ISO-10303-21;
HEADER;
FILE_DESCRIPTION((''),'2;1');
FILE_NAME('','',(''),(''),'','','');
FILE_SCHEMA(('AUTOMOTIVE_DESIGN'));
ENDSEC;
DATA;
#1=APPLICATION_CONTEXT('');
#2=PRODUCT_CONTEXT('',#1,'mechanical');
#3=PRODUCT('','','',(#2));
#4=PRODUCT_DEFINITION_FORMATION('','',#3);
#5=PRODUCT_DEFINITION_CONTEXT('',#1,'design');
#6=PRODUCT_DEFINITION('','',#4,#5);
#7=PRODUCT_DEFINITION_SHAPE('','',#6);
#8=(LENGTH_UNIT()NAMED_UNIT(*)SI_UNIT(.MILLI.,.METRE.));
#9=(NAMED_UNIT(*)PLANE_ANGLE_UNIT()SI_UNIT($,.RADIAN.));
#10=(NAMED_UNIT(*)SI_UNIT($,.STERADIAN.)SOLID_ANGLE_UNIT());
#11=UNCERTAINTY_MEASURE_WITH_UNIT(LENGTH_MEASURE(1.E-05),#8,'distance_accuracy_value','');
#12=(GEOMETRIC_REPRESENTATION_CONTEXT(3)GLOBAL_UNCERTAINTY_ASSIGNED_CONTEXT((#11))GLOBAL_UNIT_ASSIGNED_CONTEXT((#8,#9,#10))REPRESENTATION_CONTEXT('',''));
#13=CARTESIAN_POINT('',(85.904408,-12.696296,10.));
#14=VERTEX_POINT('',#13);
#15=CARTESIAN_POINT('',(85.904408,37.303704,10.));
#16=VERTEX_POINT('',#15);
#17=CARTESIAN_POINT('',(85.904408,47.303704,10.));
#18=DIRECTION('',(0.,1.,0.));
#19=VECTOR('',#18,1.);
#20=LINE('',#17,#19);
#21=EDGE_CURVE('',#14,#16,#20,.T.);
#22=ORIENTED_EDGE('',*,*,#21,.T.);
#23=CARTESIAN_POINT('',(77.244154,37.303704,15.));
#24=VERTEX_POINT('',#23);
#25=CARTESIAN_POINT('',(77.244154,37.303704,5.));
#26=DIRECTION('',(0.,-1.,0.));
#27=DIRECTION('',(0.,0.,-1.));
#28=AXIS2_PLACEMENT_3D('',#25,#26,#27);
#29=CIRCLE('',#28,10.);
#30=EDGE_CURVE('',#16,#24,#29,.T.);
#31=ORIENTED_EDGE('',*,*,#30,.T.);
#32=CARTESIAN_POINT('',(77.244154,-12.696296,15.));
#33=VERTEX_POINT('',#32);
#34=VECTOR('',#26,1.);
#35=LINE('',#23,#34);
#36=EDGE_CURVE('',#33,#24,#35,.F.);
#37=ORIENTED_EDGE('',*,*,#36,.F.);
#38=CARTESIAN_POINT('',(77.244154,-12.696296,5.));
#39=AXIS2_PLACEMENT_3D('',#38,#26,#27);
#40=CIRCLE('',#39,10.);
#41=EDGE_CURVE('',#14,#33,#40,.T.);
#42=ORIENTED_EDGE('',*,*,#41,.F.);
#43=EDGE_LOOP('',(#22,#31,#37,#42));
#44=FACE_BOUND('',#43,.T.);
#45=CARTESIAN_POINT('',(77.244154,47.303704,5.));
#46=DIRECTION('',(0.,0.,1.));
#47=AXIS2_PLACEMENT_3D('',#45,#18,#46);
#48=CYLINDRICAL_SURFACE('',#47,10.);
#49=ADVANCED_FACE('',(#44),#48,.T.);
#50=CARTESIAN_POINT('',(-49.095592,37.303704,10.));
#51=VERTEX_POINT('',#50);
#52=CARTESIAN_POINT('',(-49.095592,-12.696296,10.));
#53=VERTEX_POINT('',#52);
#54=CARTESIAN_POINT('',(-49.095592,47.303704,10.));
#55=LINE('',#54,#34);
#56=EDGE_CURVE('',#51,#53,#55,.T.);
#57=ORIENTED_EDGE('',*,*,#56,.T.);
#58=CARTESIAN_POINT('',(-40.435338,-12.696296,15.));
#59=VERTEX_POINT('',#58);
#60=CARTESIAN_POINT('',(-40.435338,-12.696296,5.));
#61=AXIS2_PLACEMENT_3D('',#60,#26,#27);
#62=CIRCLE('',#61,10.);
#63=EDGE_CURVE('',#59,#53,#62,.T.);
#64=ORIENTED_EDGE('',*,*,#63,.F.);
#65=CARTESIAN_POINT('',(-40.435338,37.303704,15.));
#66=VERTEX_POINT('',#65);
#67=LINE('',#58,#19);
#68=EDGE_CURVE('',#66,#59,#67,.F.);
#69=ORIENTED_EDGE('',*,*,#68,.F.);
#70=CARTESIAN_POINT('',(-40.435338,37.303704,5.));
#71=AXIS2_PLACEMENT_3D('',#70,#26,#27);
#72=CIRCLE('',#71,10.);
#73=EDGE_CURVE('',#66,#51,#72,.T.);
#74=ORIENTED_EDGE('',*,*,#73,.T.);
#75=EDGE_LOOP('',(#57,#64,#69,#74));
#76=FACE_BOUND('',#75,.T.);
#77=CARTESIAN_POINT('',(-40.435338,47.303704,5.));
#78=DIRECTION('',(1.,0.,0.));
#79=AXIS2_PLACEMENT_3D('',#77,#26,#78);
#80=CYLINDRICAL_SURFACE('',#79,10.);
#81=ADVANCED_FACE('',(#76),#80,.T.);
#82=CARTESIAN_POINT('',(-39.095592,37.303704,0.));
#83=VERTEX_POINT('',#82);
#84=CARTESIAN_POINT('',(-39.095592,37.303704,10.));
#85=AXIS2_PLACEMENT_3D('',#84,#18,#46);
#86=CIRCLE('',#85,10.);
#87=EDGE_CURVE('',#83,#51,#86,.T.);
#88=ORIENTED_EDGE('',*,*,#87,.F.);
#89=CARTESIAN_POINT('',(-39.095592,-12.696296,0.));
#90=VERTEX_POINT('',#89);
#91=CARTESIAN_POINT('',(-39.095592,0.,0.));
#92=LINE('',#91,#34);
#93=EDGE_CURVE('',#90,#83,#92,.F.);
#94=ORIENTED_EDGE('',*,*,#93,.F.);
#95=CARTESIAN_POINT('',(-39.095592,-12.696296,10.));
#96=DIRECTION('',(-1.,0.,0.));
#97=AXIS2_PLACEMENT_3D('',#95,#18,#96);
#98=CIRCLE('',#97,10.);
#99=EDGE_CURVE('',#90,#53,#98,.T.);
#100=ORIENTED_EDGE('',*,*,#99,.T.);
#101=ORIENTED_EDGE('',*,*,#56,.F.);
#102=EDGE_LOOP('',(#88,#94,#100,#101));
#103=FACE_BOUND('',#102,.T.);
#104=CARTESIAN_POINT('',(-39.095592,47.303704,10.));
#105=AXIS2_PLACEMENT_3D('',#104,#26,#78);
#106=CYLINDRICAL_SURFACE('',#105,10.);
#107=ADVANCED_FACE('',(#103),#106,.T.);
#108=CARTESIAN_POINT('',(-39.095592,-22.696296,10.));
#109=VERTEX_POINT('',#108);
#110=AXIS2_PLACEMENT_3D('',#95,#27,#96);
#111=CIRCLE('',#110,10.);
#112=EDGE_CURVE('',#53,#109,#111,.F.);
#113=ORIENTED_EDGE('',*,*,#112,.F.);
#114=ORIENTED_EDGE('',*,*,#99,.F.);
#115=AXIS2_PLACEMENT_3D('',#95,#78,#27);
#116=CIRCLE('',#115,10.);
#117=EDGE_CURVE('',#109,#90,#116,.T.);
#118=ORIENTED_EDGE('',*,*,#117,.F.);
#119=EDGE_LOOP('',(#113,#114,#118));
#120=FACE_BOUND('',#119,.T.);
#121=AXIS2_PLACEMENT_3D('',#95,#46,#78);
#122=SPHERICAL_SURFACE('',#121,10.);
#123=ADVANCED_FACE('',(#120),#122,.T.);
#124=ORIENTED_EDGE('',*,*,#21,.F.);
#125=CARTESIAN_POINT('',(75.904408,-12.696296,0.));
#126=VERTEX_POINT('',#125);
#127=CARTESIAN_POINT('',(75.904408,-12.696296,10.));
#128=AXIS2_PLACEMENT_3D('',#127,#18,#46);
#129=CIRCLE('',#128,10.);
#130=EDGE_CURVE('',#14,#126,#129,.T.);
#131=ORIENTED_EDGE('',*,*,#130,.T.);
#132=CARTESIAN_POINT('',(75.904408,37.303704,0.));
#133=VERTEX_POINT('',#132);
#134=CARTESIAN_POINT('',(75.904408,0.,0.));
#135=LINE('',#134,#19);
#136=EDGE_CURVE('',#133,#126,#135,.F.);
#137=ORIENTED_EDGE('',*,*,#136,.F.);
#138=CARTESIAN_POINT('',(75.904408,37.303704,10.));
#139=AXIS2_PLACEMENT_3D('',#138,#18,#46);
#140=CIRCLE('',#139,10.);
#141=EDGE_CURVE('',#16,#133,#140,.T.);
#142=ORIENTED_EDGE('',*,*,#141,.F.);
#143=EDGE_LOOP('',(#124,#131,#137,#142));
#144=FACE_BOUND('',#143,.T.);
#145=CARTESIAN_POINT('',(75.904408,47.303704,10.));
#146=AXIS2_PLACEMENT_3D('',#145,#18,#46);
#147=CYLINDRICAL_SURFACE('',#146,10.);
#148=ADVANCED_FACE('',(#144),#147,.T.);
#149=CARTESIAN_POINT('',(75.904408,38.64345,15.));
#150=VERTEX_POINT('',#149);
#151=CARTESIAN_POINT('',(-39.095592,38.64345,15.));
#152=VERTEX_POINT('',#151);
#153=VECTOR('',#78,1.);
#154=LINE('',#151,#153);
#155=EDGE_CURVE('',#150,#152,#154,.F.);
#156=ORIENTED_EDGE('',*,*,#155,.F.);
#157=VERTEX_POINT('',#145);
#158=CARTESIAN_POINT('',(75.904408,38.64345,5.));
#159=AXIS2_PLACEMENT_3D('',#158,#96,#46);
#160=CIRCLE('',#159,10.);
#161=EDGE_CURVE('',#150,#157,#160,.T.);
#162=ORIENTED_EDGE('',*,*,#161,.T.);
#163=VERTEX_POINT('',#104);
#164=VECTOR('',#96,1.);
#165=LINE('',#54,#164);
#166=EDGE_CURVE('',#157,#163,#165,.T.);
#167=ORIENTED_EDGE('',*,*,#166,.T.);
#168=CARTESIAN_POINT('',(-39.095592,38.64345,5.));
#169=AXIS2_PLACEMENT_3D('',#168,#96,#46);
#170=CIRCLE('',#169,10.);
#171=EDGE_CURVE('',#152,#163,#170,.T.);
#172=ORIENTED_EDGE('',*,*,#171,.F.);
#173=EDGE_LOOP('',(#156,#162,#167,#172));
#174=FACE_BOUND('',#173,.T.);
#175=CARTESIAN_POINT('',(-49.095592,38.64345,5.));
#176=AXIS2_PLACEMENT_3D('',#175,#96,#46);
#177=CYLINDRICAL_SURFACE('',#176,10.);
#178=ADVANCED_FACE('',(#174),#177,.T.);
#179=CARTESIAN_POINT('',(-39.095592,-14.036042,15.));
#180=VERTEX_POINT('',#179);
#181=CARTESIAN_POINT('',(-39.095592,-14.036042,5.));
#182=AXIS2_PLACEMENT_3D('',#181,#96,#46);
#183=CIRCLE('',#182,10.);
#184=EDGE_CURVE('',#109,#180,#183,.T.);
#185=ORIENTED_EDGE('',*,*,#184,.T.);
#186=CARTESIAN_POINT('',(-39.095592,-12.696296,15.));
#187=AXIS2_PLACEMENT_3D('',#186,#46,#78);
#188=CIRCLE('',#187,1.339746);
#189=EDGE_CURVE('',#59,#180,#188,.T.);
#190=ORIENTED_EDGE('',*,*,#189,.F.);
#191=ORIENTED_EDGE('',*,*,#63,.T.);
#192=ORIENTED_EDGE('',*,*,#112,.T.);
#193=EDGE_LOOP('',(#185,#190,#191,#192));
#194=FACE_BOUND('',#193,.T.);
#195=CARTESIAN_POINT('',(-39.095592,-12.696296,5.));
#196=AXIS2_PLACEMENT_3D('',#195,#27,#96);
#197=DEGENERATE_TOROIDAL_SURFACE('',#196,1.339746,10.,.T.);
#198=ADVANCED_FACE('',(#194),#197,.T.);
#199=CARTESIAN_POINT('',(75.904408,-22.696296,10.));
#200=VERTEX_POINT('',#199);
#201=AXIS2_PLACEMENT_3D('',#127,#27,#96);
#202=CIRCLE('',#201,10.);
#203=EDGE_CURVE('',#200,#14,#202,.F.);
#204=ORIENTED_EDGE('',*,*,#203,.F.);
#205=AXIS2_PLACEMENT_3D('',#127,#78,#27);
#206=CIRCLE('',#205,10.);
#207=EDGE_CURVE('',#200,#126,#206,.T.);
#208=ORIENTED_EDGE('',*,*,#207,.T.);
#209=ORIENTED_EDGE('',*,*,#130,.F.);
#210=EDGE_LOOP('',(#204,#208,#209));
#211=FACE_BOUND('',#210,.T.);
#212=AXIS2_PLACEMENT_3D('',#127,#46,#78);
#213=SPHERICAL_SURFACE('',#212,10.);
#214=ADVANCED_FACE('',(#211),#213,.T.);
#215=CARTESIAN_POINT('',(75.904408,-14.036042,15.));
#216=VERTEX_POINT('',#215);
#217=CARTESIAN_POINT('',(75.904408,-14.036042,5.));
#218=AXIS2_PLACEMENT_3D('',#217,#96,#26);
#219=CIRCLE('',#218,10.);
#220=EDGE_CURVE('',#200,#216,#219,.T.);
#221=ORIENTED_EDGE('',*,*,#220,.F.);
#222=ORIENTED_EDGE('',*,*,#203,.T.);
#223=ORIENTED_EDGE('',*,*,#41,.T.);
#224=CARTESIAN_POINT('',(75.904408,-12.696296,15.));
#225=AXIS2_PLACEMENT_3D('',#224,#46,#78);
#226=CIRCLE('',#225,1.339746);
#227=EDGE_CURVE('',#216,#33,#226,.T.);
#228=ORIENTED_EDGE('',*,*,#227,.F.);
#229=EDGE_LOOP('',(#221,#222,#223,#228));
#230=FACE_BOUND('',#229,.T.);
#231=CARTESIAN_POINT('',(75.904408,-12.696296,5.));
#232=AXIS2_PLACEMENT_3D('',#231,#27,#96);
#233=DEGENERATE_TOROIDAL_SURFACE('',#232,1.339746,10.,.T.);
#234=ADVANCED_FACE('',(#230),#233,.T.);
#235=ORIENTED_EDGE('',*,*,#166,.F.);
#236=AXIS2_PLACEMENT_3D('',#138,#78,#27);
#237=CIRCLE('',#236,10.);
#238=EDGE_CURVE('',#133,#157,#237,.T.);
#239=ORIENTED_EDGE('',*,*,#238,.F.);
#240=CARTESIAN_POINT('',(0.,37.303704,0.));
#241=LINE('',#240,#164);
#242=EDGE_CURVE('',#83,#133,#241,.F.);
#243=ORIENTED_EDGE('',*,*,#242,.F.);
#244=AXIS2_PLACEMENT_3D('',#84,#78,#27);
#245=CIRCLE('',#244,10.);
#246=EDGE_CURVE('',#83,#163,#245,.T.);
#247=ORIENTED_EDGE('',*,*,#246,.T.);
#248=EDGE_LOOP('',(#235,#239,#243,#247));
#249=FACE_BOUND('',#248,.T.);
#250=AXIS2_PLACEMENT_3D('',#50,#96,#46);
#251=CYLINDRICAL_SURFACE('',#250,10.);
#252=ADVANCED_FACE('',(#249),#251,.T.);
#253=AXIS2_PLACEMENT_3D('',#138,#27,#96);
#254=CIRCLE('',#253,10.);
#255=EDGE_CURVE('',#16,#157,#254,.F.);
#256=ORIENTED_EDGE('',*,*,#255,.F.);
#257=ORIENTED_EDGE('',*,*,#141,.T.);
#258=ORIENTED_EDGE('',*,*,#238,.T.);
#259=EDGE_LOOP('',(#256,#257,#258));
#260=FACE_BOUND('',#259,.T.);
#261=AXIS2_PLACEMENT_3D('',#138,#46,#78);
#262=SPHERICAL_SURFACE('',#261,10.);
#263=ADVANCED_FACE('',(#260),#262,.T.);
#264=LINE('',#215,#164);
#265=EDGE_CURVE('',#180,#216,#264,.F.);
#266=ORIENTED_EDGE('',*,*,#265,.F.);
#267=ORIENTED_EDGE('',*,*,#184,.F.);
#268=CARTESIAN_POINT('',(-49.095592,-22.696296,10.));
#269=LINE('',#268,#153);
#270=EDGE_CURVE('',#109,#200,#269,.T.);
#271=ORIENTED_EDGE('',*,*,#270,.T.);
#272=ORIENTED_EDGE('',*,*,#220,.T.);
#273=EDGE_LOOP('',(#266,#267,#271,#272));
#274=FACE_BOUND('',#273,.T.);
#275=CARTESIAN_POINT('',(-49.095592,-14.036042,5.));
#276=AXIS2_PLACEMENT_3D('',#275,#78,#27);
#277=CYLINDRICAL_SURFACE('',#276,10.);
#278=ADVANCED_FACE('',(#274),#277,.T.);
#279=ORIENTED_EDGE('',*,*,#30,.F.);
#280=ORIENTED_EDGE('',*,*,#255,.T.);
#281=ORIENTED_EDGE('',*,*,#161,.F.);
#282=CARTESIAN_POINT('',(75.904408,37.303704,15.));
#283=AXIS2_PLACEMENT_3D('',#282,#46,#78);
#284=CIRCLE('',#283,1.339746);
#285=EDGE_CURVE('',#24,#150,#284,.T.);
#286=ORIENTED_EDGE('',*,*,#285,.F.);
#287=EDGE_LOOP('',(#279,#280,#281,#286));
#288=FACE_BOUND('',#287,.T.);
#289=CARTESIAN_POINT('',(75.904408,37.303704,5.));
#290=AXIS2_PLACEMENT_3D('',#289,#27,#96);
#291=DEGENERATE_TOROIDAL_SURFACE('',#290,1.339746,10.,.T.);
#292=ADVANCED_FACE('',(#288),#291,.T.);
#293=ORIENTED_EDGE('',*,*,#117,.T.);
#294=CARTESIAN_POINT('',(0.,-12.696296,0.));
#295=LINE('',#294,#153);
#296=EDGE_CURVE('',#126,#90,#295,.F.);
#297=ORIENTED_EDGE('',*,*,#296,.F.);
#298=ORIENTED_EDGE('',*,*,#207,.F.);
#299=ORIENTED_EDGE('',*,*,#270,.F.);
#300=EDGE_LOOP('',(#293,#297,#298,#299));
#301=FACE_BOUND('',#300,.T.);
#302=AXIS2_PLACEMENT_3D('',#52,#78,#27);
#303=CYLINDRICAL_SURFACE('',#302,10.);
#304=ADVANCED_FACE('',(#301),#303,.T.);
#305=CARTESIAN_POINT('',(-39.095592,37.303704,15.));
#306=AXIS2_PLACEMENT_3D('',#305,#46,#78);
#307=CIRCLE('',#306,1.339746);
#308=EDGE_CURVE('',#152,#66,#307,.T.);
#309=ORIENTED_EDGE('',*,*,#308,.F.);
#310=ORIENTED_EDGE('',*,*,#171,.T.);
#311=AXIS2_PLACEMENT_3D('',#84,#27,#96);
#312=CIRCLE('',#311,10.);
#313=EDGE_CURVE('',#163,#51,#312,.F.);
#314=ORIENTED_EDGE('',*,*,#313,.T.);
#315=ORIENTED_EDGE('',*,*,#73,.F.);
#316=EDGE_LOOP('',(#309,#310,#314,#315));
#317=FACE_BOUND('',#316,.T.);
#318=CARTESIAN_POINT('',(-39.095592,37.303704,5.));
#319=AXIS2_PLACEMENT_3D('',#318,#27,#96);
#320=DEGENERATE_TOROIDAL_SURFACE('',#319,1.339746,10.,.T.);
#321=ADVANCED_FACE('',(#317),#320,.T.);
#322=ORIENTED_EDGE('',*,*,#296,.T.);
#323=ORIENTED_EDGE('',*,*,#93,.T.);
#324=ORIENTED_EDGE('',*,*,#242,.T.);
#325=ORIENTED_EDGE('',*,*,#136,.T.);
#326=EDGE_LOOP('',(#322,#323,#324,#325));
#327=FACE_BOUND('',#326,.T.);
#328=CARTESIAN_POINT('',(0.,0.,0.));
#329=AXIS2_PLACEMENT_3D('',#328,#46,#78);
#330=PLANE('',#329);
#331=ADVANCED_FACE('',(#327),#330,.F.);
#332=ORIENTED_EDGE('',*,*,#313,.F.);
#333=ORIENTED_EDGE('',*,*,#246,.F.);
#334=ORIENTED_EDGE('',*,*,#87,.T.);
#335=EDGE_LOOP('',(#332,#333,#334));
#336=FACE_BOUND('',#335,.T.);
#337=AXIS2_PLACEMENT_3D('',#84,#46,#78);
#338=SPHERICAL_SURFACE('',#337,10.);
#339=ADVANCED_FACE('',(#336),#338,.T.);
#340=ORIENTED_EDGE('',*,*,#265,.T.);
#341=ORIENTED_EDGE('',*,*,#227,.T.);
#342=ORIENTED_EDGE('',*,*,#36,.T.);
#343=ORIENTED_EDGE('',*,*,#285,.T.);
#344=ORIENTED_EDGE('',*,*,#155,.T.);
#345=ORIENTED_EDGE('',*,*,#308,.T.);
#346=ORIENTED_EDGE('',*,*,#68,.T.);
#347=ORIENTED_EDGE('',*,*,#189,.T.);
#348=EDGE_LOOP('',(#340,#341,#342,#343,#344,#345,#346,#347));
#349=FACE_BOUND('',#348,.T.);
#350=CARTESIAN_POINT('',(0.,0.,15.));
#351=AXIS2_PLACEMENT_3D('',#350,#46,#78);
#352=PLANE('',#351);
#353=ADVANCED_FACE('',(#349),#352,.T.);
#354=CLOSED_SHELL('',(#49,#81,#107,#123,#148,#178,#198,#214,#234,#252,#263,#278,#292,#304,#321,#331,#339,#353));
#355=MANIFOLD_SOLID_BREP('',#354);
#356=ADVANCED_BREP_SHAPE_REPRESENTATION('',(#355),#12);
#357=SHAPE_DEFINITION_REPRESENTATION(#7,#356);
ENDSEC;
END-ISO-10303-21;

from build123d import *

# Parameters (mm, degrees)
SKETCH1_W           = 135
SKETCH1_H           = 70
BOSS_EXTRUDE1_DEPTH = 15
FILLET2_R           = 10
FILLET3_R           = 10
FILLET4_R           = 10
FILLET5_R           = 10
FILLET12_R          = 10
FILLET13_R          = 10


with BuildPart() as part:
    # Sketch1 → Boss-Extrude1 (new body)
    with BuildSketch(Plane.XY):
        with Locations((18.404407689, 12.303703611)):
            Rectangle(SKETCH1_W, SKETCH1_H)
    extrude(amount=BOSS_EXTRUDE1_DEPTH)

    # Fillet2
    fillet2_edges = [part.edges().sort_by_distance(p)[0] for p in [
        (-49.095592311, -22.696296389, 7.5),
    ]]
    fillet(fillet2_edges, radius=FILLET2_R)

    # Fillet3
    fillet3_edges = [part.edges().sort_by_distance(p)[0] for p in [
        (-49.095592311, 47.303703611, 7.5),
    ]]
    fillet(fillet3_edges, radius=FILLET3_R)

    # Fillet4
    fillet4_edges = [part.edges().sort_by_distance(p)[0] for p in [
        (85.904407689, 47.303703611, 7.5),
    ]]
    fillet(fillet4_edges, radius=FILLET4_R)

    # Fillet5
    fillet5_edges = [part.edges().sort_by_distance(p)[0] for p in [
        (85.904407689, -22.696296389, 7.5),
    ]]
    fillet(fillet5_edges, radius=FILLET5_R)

    # Fillet12
    fillet12_edges = [part.edges().sort_by_distance(p)[0] for p in [
        (18.404407689, -22.696296389, 0),
        (-46.166660123, -19.7673642, 0),
        (-49.095592311, 12.303703611, 0),
        (-46.166660123, 44.374771423, 0),
        (18.404407689, 47.303703611, 0),
        (82.975475501, 44.374771423, 0),
        (85.904407689, 12.303703611, 0),
        (82.975475501, -19.7673642, 0),
    ]]
    fillet(fillet12_edges, radius=FILLET12_R)

    # Fillet13
    # the kernel refuses this fillet: 10 mm, written as the material it takes off along each edge
    with BuildSketch(Plane(origin=(75.904407689, 37.303703611, 15), x_dir=(0, 1, 0), z_dir=(-1, 0, 0))) as fillet13_piece_1:
        with BuildLine():
            CenterArc((1.339745962, 10), FILLET13_R, 270, 60)
            Line((10, 5), (10.173205081, 4.9))
            ThreePointArc((10.173205081, 4.9), (10.2, 2.5), (10.2, 0))
            Line((10.2, 0), (10, -0.2))
            Line((10, -0.2), (1.339745962, -0.2))
            Line((1.339745962, -0.2), (1.339745962, 0))
        make_face()
    revolve(axis=Axis((75.904407689, 37.303703611, 15), (0, 0, -1)), revolution_arc=90, mode=Mode.SUBTRACT)
    with BuildSketch(Plane(origin=(75.904407689, -12.696296389, 15), x_dir=(1, 0, 0), z_dir=(0, 1, 0))) as fillet13_piece_2:
        with BuildLine():
            CenterArc((1.339745962, 10), FILLET13_R, 270, 60)
            Line((1.339745962, 0), (1.339745962, -0.2))
            Line((1.339745962, -0.2), (10, -0.2))
            Line((10, -0.2), (10.2, 0))
            ThreePointArc((10.2, 0), (10.2, 2.5), (10.173205081, 4.9))
            Line((10.173205081, 4.9), (10, 5))
        make_face()
    revolve(axis=Axis((75.904407689, -12.696296389, 15), (0, 0, -1)), revolution_arc=90, mode=Mode.SUBTRACT)
    with BuildSketch(Plane(origin=(-39.095592311, -12.696296389, 15), x_dir=(0, -1, 0), z_dir=(1, 0, 0))) as fillet13_piece_3:
        with BuildLine():
            CenterArc((1.339745962, 10), FILLET13_R, 270, 60)
            Line((10, 5), (10.173205081, 4.9))
            ThreePointArc((10.173205081, 4.9), (10.2, 2.5), (10.2, 0))
            Line((10.2, 0), (10, -0.2))
            Line((10, -0.2), (1.339745962, -0.2))
            Line((1.339745962, -0.2), (1.339745962, 0))
        make_face()
    revolve(axis=Axis((-39.095592311, -12.696296389, 15), (0, 0, -1)), revolution_arc=90, mode=Mode.SUBTRACT)
    with BuildSketch(Plane(origin=(-39.095592311, 37.303703611, 15), x_dir=(-1, 0, 0), z_dir=(0, -1, 0))) as fillet13_piece_4:
        with BuildLine():
            CenterArc((1.339745962, 10), FILLET13_R, 270, 60)
            Line((10, 5), (10.173205081, 4.9))
            ThreePointArc((10.173205081, 4.9), (10.2, 2.5), (10.2, 0))
            Line((10.2, 0), (10, -0.2))
            Line((10, -0.2), (1.339745962, -0.2))
            Line((1.339745962, -0.2), (1.339745962, 0))
        make_face()
    revolve(axis=Axis((-39.095592311, 37.303703611, 15), (0, 0, -1)), revolution_arc=90, mode=Mode.SUBTRACT)
    with BuildSketch(Plane(origin=(-49.095592311, -12.696296389, 15), x_dir=(0, 0, -1), z_dir=(0, 1, 0)), Plane(origin=(85.904407689, 37.303703611, 15), x_dir=(0, 0, -1), z_dir=(0, -1, 0))) as fillet13_piece_5:
        with BuildLine():
            CenterArc((10, -8.660254038), FILLET13_R, 120, 60)
            Line((0, -8.660254038), (-0.2, -8.660254038))
            Line((-0.2, -8.660254038), (-0.2, 0))
            Line((-0.2, 0), (0, 0.2))
            ThreePointArc((0, 0.2), (2.5, 0.2), (4.9, 0.173205081))
            Line((4.9, 0.173205081), (5, 0))
        make_face()
    extrude(amount=50, mode=Mode.SUBTRACT)
    with BuildSketch(Plane(origin=(75.904407689, -22.696296389, 15), x_dir=(0, 0, -1), z_dir=(-1, 0, 0)), Plane(origin=(-39.095592311, 47.303703611, 15), x_dir=(0, 0, -1), z_dir=(1, 0, 0))) as fillet13_piece_6:
        with BuildLine():
            CenterArc((10, -8.660254038), FILLET13_R, 120, 60)
            Line((0, -8.660254038), (-0.2, -8.660254038))
            Line((-0.2, -8.660254038), (-0.2, 0))
            Line((-0.2, 0), (0, 0.2))
            ThreePointArc((0, 0.2), (2.5, 0.2), (4.9, 0.173205081))
            Line((4.9, 0.173205081), (5, 0))
        make_face()
    extrude(amount=115, mode=Mode.SUBTRACT)


solid = part.part
